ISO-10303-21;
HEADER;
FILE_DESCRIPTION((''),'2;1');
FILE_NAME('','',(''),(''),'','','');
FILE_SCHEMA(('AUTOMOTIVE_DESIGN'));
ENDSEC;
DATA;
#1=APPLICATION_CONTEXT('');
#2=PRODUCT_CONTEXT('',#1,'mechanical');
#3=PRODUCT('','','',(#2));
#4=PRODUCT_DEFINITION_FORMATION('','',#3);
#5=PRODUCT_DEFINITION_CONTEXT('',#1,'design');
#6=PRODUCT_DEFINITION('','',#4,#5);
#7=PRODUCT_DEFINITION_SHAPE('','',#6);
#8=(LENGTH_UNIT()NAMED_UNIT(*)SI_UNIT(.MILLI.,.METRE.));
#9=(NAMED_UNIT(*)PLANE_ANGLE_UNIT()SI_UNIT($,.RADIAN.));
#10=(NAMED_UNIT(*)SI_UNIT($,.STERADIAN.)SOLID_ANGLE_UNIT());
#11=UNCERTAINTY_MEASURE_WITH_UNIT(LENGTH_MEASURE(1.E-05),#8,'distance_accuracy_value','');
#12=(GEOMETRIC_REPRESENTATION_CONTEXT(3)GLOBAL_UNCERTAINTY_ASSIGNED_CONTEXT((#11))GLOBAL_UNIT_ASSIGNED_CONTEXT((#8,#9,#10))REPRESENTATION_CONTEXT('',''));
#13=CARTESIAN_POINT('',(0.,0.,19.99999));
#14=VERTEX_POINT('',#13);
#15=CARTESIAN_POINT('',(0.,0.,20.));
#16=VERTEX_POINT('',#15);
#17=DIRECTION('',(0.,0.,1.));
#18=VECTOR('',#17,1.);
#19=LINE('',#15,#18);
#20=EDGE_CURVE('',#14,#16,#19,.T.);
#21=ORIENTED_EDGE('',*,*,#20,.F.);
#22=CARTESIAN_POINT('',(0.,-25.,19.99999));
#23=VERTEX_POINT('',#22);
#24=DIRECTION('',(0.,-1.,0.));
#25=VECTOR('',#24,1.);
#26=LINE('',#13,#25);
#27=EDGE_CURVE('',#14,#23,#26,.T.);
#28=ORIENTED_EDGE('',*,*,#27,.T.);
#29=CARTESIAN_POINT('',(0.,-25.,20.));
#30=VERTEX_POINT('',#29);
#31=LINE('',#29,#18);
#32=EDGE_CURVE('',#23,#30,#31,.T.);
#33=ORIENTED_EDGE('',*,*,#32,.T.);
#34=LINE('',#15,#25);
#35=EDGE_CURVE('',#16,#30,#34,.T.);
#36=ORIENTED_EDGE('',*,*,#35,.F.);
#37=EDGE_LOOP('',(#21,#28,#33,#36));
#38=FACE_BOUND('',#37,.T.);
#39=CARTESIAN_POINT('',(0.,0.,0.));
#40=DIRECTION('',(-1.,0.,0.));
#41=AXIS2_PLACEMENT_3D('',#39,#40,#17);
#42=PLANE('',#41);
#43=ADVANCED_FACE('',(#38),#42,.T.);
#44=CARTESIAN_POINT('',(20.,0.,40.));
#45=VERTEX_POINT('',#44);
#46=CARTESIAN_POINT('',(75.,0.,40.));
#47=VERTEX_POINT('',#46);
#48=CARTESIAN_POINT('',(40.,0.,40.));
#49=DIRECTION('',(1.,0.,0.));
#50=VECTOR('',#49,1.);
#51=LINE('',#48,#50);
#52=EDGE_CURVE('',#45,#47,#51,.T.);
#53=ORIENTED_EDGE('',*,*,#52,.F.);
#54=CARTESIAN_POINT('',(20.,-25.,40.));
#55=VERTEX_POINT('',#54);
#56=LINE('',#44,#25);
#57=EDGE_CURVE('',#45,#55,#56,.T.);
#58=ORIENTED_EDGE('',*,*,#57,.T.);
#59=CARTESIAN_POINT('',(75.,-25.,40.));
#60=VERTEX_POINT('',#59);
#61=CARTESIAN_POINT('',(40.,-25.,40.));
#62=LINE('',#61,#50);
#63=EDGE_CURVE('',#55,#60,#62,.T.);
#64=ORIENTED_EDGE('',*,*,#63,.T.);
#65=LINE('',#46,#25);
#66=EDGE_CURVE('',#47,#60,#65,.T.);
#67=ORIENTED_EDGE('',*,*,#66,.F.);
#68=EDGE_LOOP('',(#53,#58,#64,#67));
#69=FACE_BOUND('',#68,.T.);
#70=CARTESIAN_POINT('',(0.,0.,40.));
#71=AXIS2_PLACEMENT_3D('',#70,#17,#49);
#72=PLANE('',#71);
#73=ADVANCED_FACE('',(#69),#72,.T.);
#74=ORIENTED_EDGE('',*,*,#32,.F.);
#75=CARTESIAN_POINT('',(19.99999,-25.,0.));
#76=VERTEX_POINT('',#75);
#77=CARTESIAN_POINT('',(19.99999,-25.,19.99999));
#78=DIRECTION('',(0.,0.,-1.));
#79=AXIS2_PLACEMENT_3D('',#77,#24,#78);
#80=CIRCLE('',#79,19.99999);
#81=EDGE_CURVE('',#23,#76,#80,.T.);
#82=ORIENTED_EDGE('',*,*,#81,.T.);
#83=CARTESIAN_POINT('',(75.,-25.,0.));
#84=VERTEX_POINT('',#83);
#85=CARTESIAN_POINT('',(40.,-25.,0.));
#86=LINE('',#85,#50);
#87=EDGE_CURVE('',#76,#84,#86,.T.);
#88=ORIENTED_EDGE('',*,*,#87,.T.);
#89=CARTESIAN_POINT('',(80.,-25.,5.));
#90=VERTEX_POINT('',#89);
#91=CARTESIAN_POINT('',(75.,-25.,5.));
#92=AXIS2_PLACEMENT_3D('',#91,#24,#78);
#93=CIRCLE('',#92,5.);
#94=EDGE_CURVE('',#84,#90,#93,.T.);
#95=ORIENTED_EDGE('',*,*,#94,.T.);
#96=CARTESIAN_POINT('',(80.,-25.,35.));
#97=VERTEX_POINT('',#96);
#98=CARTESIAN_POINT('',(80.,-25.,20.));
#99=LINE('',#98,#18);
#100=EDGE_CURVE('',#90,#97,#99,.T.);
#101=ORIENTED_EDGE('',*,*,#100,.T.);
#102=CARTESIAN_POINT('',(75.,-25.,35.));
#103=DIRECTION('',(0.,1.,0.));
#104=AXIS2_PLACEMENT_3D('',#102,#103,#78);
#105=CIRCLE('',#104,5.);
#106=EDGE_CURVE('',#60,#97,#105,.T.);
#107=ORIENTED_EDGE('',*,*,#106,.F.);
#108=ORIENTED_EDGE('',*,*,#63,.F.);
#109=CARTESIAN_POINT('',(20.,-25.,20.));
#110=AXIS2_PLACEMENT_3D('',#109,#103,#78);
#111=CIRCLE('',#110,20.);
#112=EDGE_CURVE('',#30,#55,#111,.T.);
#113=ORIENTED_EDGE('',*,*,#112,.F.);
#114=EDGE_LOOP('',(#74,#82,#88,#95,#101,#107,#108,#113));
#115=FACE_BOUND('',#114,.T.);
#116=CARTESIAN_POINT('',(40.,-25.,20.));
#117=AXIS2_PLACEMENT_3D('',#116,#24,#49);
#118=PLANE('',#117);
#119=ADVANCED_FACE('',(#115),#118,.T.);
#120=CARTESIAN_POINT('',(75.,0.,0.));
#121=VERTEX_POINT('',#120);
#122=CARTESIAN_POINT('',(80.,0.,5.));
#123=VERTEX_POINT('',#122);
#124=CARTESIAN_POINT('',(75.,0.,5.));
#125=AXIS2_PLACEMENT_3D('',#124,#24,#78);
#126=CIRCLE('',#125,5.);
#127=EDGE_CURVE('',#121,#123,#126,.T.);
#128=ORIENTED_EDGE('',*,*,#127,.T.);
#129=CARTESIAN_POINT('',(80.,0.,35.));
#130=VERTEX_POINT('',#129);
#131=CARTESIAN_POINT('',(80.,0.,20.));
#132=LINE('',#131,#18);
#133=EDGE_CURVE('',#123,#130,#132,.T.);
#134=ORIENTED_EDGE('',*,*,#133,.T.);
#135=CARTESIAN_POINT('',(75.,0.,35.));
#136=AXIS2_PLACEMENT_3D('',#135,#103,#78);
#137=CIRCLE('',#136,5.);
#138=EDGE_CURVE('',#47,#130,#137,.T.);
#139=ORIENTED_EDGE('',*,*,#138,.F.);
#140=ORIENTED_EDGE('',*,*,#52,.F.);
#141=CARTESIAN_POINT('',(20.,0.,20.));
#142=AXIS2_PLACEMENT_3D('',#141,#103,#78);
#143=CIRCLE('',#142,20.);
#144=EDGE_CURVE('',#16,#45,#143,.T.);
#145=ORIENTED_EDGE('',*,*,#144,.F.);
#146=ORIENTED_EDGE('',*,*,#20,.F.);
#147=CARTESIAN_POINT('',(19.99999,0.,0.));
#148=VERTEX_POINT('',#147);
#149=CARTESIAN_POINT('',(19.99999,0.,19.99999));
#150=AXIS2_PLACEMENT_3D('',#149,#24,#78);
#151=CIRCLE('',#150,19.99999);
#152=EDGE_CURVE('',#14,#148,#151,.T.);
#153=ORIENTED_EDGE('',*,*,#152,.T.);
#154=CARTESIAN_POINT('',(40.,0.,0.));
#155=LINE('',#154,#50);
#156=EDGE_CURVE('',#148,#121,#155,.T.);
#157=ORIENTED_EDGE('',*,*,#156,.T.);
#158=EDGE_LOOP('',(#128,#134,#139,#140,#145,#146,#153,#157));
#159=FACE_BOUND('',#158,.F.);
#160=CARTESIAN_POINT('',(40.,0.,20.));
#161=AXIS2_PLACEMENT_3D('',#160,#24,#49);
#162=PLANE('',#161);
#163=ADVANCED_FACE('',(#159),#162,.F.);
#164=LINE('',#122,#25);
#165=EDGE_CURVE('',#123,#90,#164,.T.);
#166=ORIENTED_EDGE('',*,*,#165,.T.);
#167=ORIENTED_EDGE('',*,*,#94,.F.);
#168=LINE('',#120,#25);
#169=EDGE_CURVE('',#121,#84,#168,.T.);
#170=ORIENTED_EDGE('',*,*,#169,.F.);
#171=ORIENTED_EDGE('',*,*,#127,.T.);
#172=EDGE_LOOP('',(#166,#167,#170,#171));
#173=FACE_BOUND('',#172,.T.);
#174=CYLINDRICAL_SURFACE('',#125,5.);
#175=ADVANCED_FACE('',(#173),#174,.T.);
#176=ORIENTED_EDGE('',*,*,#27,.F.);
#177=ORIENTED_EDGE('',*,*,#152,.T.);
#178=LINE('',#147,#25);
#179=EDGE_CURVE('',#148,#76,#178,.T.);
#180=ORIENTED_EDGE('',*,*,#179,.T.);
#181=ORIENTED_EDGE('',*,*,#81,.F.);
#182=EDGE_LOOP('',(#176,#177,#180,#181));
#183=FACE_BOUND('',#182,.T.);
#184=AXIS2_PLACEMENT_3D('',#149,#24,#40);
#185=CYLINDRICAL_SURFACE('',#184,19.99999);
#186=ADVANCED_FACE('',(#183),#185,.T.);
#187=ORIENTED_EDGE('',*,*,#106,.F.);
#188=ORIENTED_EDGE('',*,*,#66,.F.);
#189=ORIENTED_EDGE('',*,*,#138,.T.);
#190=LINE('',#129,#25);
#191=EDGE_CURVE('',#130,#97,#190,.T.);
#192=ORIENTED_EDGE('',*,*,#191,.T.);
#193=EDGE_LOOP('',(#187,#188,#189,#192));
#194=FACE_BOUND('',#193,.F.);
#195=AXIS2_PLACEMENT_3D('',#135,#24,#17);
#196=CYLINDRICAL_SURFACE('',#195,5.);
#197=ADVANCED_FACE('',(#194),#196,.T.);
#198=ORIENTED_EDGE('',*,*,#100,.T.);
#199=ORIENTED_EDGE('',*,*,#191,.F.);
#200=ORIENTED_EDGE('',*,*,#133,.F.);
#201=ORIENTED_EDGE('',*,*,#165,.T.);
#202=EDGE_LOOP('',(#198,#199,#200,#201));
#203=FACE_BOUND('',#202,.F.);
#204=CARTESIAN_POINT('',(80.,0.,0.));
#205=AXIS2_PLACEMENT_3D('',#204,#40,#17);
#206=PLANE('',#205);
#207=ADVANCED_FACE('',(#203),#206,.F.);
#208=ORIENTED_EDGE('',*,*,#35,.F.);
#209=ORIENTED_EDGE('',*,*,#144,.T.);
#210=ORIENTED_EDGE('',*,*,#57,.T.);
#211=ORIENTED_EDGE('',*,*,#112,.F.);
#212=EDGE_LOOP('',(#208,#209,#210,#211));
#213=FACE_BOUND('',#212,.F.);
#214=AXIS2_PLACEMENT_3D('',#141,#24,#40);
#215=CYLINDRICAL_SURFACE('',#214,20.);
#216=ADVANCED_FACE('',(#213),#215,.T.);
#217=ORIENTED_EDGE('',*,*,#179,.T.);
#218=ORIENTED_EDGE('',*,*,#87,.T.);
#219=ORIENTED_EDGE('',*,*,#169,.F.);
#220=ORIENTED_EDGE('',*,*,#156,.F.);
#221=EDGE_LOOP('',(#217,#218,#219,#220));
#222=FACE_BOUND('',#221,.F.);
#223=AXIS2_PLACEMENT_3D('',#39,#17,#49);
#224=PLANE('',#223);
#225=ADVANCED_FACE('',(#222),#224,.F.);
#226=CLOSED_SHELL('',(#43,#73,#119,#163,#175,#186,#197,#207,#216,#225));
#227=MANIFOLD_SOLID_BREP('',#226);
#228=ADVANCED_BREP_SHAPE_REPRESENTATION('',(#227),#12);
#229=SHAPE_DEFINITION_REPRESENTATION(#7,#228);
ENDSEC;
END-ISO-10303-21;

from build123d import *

# Parameters (mm, degrees)
F0_W     = 80
F0_H     = 40
F1_DEPTH = 25
F2_R     = 20
F3_R     = 19.99999
F4_R     = 5


# Not quite as in the source:
# - a fillet or chamfer is up to 0.001 mm smaller than in the source, because OpenCascade refuses the exact size


with BuildPart() as f1:
    # F0 (on Front) → F1 (new body)
    with BuildSketch(Plane.XZ):
        with Locations((40, 20)):
            Rectangle(F0_W, F0_H)
    extrude(amount=F1_DEPTH)

    # F2
    f2_edges = [f1.edges().sort_by_distance(p)[0] for p in [
        (0, -12.5, 40),
    ]]
    fillet(f2_edges, radius=F2_R)

    # F3 (radius 20 in the source; OpenCascade refuses exactly that, so slightly less here)
    f3_edges = [f1.edges().sort_by_distance(p)[0] for p in [
        (0, -12.5, 0),
    ]]
    fillet(f3_edges, radius=F3_R)

    # F4
    f4_edges = [f1.edges().sort_by_distance(p)[0] for p in [
        (80, -12.5, 40),
        (80, -12.5, 0),
    ]]
    fillet(f4_edges, radius=F4_R)


solid = f1.part
